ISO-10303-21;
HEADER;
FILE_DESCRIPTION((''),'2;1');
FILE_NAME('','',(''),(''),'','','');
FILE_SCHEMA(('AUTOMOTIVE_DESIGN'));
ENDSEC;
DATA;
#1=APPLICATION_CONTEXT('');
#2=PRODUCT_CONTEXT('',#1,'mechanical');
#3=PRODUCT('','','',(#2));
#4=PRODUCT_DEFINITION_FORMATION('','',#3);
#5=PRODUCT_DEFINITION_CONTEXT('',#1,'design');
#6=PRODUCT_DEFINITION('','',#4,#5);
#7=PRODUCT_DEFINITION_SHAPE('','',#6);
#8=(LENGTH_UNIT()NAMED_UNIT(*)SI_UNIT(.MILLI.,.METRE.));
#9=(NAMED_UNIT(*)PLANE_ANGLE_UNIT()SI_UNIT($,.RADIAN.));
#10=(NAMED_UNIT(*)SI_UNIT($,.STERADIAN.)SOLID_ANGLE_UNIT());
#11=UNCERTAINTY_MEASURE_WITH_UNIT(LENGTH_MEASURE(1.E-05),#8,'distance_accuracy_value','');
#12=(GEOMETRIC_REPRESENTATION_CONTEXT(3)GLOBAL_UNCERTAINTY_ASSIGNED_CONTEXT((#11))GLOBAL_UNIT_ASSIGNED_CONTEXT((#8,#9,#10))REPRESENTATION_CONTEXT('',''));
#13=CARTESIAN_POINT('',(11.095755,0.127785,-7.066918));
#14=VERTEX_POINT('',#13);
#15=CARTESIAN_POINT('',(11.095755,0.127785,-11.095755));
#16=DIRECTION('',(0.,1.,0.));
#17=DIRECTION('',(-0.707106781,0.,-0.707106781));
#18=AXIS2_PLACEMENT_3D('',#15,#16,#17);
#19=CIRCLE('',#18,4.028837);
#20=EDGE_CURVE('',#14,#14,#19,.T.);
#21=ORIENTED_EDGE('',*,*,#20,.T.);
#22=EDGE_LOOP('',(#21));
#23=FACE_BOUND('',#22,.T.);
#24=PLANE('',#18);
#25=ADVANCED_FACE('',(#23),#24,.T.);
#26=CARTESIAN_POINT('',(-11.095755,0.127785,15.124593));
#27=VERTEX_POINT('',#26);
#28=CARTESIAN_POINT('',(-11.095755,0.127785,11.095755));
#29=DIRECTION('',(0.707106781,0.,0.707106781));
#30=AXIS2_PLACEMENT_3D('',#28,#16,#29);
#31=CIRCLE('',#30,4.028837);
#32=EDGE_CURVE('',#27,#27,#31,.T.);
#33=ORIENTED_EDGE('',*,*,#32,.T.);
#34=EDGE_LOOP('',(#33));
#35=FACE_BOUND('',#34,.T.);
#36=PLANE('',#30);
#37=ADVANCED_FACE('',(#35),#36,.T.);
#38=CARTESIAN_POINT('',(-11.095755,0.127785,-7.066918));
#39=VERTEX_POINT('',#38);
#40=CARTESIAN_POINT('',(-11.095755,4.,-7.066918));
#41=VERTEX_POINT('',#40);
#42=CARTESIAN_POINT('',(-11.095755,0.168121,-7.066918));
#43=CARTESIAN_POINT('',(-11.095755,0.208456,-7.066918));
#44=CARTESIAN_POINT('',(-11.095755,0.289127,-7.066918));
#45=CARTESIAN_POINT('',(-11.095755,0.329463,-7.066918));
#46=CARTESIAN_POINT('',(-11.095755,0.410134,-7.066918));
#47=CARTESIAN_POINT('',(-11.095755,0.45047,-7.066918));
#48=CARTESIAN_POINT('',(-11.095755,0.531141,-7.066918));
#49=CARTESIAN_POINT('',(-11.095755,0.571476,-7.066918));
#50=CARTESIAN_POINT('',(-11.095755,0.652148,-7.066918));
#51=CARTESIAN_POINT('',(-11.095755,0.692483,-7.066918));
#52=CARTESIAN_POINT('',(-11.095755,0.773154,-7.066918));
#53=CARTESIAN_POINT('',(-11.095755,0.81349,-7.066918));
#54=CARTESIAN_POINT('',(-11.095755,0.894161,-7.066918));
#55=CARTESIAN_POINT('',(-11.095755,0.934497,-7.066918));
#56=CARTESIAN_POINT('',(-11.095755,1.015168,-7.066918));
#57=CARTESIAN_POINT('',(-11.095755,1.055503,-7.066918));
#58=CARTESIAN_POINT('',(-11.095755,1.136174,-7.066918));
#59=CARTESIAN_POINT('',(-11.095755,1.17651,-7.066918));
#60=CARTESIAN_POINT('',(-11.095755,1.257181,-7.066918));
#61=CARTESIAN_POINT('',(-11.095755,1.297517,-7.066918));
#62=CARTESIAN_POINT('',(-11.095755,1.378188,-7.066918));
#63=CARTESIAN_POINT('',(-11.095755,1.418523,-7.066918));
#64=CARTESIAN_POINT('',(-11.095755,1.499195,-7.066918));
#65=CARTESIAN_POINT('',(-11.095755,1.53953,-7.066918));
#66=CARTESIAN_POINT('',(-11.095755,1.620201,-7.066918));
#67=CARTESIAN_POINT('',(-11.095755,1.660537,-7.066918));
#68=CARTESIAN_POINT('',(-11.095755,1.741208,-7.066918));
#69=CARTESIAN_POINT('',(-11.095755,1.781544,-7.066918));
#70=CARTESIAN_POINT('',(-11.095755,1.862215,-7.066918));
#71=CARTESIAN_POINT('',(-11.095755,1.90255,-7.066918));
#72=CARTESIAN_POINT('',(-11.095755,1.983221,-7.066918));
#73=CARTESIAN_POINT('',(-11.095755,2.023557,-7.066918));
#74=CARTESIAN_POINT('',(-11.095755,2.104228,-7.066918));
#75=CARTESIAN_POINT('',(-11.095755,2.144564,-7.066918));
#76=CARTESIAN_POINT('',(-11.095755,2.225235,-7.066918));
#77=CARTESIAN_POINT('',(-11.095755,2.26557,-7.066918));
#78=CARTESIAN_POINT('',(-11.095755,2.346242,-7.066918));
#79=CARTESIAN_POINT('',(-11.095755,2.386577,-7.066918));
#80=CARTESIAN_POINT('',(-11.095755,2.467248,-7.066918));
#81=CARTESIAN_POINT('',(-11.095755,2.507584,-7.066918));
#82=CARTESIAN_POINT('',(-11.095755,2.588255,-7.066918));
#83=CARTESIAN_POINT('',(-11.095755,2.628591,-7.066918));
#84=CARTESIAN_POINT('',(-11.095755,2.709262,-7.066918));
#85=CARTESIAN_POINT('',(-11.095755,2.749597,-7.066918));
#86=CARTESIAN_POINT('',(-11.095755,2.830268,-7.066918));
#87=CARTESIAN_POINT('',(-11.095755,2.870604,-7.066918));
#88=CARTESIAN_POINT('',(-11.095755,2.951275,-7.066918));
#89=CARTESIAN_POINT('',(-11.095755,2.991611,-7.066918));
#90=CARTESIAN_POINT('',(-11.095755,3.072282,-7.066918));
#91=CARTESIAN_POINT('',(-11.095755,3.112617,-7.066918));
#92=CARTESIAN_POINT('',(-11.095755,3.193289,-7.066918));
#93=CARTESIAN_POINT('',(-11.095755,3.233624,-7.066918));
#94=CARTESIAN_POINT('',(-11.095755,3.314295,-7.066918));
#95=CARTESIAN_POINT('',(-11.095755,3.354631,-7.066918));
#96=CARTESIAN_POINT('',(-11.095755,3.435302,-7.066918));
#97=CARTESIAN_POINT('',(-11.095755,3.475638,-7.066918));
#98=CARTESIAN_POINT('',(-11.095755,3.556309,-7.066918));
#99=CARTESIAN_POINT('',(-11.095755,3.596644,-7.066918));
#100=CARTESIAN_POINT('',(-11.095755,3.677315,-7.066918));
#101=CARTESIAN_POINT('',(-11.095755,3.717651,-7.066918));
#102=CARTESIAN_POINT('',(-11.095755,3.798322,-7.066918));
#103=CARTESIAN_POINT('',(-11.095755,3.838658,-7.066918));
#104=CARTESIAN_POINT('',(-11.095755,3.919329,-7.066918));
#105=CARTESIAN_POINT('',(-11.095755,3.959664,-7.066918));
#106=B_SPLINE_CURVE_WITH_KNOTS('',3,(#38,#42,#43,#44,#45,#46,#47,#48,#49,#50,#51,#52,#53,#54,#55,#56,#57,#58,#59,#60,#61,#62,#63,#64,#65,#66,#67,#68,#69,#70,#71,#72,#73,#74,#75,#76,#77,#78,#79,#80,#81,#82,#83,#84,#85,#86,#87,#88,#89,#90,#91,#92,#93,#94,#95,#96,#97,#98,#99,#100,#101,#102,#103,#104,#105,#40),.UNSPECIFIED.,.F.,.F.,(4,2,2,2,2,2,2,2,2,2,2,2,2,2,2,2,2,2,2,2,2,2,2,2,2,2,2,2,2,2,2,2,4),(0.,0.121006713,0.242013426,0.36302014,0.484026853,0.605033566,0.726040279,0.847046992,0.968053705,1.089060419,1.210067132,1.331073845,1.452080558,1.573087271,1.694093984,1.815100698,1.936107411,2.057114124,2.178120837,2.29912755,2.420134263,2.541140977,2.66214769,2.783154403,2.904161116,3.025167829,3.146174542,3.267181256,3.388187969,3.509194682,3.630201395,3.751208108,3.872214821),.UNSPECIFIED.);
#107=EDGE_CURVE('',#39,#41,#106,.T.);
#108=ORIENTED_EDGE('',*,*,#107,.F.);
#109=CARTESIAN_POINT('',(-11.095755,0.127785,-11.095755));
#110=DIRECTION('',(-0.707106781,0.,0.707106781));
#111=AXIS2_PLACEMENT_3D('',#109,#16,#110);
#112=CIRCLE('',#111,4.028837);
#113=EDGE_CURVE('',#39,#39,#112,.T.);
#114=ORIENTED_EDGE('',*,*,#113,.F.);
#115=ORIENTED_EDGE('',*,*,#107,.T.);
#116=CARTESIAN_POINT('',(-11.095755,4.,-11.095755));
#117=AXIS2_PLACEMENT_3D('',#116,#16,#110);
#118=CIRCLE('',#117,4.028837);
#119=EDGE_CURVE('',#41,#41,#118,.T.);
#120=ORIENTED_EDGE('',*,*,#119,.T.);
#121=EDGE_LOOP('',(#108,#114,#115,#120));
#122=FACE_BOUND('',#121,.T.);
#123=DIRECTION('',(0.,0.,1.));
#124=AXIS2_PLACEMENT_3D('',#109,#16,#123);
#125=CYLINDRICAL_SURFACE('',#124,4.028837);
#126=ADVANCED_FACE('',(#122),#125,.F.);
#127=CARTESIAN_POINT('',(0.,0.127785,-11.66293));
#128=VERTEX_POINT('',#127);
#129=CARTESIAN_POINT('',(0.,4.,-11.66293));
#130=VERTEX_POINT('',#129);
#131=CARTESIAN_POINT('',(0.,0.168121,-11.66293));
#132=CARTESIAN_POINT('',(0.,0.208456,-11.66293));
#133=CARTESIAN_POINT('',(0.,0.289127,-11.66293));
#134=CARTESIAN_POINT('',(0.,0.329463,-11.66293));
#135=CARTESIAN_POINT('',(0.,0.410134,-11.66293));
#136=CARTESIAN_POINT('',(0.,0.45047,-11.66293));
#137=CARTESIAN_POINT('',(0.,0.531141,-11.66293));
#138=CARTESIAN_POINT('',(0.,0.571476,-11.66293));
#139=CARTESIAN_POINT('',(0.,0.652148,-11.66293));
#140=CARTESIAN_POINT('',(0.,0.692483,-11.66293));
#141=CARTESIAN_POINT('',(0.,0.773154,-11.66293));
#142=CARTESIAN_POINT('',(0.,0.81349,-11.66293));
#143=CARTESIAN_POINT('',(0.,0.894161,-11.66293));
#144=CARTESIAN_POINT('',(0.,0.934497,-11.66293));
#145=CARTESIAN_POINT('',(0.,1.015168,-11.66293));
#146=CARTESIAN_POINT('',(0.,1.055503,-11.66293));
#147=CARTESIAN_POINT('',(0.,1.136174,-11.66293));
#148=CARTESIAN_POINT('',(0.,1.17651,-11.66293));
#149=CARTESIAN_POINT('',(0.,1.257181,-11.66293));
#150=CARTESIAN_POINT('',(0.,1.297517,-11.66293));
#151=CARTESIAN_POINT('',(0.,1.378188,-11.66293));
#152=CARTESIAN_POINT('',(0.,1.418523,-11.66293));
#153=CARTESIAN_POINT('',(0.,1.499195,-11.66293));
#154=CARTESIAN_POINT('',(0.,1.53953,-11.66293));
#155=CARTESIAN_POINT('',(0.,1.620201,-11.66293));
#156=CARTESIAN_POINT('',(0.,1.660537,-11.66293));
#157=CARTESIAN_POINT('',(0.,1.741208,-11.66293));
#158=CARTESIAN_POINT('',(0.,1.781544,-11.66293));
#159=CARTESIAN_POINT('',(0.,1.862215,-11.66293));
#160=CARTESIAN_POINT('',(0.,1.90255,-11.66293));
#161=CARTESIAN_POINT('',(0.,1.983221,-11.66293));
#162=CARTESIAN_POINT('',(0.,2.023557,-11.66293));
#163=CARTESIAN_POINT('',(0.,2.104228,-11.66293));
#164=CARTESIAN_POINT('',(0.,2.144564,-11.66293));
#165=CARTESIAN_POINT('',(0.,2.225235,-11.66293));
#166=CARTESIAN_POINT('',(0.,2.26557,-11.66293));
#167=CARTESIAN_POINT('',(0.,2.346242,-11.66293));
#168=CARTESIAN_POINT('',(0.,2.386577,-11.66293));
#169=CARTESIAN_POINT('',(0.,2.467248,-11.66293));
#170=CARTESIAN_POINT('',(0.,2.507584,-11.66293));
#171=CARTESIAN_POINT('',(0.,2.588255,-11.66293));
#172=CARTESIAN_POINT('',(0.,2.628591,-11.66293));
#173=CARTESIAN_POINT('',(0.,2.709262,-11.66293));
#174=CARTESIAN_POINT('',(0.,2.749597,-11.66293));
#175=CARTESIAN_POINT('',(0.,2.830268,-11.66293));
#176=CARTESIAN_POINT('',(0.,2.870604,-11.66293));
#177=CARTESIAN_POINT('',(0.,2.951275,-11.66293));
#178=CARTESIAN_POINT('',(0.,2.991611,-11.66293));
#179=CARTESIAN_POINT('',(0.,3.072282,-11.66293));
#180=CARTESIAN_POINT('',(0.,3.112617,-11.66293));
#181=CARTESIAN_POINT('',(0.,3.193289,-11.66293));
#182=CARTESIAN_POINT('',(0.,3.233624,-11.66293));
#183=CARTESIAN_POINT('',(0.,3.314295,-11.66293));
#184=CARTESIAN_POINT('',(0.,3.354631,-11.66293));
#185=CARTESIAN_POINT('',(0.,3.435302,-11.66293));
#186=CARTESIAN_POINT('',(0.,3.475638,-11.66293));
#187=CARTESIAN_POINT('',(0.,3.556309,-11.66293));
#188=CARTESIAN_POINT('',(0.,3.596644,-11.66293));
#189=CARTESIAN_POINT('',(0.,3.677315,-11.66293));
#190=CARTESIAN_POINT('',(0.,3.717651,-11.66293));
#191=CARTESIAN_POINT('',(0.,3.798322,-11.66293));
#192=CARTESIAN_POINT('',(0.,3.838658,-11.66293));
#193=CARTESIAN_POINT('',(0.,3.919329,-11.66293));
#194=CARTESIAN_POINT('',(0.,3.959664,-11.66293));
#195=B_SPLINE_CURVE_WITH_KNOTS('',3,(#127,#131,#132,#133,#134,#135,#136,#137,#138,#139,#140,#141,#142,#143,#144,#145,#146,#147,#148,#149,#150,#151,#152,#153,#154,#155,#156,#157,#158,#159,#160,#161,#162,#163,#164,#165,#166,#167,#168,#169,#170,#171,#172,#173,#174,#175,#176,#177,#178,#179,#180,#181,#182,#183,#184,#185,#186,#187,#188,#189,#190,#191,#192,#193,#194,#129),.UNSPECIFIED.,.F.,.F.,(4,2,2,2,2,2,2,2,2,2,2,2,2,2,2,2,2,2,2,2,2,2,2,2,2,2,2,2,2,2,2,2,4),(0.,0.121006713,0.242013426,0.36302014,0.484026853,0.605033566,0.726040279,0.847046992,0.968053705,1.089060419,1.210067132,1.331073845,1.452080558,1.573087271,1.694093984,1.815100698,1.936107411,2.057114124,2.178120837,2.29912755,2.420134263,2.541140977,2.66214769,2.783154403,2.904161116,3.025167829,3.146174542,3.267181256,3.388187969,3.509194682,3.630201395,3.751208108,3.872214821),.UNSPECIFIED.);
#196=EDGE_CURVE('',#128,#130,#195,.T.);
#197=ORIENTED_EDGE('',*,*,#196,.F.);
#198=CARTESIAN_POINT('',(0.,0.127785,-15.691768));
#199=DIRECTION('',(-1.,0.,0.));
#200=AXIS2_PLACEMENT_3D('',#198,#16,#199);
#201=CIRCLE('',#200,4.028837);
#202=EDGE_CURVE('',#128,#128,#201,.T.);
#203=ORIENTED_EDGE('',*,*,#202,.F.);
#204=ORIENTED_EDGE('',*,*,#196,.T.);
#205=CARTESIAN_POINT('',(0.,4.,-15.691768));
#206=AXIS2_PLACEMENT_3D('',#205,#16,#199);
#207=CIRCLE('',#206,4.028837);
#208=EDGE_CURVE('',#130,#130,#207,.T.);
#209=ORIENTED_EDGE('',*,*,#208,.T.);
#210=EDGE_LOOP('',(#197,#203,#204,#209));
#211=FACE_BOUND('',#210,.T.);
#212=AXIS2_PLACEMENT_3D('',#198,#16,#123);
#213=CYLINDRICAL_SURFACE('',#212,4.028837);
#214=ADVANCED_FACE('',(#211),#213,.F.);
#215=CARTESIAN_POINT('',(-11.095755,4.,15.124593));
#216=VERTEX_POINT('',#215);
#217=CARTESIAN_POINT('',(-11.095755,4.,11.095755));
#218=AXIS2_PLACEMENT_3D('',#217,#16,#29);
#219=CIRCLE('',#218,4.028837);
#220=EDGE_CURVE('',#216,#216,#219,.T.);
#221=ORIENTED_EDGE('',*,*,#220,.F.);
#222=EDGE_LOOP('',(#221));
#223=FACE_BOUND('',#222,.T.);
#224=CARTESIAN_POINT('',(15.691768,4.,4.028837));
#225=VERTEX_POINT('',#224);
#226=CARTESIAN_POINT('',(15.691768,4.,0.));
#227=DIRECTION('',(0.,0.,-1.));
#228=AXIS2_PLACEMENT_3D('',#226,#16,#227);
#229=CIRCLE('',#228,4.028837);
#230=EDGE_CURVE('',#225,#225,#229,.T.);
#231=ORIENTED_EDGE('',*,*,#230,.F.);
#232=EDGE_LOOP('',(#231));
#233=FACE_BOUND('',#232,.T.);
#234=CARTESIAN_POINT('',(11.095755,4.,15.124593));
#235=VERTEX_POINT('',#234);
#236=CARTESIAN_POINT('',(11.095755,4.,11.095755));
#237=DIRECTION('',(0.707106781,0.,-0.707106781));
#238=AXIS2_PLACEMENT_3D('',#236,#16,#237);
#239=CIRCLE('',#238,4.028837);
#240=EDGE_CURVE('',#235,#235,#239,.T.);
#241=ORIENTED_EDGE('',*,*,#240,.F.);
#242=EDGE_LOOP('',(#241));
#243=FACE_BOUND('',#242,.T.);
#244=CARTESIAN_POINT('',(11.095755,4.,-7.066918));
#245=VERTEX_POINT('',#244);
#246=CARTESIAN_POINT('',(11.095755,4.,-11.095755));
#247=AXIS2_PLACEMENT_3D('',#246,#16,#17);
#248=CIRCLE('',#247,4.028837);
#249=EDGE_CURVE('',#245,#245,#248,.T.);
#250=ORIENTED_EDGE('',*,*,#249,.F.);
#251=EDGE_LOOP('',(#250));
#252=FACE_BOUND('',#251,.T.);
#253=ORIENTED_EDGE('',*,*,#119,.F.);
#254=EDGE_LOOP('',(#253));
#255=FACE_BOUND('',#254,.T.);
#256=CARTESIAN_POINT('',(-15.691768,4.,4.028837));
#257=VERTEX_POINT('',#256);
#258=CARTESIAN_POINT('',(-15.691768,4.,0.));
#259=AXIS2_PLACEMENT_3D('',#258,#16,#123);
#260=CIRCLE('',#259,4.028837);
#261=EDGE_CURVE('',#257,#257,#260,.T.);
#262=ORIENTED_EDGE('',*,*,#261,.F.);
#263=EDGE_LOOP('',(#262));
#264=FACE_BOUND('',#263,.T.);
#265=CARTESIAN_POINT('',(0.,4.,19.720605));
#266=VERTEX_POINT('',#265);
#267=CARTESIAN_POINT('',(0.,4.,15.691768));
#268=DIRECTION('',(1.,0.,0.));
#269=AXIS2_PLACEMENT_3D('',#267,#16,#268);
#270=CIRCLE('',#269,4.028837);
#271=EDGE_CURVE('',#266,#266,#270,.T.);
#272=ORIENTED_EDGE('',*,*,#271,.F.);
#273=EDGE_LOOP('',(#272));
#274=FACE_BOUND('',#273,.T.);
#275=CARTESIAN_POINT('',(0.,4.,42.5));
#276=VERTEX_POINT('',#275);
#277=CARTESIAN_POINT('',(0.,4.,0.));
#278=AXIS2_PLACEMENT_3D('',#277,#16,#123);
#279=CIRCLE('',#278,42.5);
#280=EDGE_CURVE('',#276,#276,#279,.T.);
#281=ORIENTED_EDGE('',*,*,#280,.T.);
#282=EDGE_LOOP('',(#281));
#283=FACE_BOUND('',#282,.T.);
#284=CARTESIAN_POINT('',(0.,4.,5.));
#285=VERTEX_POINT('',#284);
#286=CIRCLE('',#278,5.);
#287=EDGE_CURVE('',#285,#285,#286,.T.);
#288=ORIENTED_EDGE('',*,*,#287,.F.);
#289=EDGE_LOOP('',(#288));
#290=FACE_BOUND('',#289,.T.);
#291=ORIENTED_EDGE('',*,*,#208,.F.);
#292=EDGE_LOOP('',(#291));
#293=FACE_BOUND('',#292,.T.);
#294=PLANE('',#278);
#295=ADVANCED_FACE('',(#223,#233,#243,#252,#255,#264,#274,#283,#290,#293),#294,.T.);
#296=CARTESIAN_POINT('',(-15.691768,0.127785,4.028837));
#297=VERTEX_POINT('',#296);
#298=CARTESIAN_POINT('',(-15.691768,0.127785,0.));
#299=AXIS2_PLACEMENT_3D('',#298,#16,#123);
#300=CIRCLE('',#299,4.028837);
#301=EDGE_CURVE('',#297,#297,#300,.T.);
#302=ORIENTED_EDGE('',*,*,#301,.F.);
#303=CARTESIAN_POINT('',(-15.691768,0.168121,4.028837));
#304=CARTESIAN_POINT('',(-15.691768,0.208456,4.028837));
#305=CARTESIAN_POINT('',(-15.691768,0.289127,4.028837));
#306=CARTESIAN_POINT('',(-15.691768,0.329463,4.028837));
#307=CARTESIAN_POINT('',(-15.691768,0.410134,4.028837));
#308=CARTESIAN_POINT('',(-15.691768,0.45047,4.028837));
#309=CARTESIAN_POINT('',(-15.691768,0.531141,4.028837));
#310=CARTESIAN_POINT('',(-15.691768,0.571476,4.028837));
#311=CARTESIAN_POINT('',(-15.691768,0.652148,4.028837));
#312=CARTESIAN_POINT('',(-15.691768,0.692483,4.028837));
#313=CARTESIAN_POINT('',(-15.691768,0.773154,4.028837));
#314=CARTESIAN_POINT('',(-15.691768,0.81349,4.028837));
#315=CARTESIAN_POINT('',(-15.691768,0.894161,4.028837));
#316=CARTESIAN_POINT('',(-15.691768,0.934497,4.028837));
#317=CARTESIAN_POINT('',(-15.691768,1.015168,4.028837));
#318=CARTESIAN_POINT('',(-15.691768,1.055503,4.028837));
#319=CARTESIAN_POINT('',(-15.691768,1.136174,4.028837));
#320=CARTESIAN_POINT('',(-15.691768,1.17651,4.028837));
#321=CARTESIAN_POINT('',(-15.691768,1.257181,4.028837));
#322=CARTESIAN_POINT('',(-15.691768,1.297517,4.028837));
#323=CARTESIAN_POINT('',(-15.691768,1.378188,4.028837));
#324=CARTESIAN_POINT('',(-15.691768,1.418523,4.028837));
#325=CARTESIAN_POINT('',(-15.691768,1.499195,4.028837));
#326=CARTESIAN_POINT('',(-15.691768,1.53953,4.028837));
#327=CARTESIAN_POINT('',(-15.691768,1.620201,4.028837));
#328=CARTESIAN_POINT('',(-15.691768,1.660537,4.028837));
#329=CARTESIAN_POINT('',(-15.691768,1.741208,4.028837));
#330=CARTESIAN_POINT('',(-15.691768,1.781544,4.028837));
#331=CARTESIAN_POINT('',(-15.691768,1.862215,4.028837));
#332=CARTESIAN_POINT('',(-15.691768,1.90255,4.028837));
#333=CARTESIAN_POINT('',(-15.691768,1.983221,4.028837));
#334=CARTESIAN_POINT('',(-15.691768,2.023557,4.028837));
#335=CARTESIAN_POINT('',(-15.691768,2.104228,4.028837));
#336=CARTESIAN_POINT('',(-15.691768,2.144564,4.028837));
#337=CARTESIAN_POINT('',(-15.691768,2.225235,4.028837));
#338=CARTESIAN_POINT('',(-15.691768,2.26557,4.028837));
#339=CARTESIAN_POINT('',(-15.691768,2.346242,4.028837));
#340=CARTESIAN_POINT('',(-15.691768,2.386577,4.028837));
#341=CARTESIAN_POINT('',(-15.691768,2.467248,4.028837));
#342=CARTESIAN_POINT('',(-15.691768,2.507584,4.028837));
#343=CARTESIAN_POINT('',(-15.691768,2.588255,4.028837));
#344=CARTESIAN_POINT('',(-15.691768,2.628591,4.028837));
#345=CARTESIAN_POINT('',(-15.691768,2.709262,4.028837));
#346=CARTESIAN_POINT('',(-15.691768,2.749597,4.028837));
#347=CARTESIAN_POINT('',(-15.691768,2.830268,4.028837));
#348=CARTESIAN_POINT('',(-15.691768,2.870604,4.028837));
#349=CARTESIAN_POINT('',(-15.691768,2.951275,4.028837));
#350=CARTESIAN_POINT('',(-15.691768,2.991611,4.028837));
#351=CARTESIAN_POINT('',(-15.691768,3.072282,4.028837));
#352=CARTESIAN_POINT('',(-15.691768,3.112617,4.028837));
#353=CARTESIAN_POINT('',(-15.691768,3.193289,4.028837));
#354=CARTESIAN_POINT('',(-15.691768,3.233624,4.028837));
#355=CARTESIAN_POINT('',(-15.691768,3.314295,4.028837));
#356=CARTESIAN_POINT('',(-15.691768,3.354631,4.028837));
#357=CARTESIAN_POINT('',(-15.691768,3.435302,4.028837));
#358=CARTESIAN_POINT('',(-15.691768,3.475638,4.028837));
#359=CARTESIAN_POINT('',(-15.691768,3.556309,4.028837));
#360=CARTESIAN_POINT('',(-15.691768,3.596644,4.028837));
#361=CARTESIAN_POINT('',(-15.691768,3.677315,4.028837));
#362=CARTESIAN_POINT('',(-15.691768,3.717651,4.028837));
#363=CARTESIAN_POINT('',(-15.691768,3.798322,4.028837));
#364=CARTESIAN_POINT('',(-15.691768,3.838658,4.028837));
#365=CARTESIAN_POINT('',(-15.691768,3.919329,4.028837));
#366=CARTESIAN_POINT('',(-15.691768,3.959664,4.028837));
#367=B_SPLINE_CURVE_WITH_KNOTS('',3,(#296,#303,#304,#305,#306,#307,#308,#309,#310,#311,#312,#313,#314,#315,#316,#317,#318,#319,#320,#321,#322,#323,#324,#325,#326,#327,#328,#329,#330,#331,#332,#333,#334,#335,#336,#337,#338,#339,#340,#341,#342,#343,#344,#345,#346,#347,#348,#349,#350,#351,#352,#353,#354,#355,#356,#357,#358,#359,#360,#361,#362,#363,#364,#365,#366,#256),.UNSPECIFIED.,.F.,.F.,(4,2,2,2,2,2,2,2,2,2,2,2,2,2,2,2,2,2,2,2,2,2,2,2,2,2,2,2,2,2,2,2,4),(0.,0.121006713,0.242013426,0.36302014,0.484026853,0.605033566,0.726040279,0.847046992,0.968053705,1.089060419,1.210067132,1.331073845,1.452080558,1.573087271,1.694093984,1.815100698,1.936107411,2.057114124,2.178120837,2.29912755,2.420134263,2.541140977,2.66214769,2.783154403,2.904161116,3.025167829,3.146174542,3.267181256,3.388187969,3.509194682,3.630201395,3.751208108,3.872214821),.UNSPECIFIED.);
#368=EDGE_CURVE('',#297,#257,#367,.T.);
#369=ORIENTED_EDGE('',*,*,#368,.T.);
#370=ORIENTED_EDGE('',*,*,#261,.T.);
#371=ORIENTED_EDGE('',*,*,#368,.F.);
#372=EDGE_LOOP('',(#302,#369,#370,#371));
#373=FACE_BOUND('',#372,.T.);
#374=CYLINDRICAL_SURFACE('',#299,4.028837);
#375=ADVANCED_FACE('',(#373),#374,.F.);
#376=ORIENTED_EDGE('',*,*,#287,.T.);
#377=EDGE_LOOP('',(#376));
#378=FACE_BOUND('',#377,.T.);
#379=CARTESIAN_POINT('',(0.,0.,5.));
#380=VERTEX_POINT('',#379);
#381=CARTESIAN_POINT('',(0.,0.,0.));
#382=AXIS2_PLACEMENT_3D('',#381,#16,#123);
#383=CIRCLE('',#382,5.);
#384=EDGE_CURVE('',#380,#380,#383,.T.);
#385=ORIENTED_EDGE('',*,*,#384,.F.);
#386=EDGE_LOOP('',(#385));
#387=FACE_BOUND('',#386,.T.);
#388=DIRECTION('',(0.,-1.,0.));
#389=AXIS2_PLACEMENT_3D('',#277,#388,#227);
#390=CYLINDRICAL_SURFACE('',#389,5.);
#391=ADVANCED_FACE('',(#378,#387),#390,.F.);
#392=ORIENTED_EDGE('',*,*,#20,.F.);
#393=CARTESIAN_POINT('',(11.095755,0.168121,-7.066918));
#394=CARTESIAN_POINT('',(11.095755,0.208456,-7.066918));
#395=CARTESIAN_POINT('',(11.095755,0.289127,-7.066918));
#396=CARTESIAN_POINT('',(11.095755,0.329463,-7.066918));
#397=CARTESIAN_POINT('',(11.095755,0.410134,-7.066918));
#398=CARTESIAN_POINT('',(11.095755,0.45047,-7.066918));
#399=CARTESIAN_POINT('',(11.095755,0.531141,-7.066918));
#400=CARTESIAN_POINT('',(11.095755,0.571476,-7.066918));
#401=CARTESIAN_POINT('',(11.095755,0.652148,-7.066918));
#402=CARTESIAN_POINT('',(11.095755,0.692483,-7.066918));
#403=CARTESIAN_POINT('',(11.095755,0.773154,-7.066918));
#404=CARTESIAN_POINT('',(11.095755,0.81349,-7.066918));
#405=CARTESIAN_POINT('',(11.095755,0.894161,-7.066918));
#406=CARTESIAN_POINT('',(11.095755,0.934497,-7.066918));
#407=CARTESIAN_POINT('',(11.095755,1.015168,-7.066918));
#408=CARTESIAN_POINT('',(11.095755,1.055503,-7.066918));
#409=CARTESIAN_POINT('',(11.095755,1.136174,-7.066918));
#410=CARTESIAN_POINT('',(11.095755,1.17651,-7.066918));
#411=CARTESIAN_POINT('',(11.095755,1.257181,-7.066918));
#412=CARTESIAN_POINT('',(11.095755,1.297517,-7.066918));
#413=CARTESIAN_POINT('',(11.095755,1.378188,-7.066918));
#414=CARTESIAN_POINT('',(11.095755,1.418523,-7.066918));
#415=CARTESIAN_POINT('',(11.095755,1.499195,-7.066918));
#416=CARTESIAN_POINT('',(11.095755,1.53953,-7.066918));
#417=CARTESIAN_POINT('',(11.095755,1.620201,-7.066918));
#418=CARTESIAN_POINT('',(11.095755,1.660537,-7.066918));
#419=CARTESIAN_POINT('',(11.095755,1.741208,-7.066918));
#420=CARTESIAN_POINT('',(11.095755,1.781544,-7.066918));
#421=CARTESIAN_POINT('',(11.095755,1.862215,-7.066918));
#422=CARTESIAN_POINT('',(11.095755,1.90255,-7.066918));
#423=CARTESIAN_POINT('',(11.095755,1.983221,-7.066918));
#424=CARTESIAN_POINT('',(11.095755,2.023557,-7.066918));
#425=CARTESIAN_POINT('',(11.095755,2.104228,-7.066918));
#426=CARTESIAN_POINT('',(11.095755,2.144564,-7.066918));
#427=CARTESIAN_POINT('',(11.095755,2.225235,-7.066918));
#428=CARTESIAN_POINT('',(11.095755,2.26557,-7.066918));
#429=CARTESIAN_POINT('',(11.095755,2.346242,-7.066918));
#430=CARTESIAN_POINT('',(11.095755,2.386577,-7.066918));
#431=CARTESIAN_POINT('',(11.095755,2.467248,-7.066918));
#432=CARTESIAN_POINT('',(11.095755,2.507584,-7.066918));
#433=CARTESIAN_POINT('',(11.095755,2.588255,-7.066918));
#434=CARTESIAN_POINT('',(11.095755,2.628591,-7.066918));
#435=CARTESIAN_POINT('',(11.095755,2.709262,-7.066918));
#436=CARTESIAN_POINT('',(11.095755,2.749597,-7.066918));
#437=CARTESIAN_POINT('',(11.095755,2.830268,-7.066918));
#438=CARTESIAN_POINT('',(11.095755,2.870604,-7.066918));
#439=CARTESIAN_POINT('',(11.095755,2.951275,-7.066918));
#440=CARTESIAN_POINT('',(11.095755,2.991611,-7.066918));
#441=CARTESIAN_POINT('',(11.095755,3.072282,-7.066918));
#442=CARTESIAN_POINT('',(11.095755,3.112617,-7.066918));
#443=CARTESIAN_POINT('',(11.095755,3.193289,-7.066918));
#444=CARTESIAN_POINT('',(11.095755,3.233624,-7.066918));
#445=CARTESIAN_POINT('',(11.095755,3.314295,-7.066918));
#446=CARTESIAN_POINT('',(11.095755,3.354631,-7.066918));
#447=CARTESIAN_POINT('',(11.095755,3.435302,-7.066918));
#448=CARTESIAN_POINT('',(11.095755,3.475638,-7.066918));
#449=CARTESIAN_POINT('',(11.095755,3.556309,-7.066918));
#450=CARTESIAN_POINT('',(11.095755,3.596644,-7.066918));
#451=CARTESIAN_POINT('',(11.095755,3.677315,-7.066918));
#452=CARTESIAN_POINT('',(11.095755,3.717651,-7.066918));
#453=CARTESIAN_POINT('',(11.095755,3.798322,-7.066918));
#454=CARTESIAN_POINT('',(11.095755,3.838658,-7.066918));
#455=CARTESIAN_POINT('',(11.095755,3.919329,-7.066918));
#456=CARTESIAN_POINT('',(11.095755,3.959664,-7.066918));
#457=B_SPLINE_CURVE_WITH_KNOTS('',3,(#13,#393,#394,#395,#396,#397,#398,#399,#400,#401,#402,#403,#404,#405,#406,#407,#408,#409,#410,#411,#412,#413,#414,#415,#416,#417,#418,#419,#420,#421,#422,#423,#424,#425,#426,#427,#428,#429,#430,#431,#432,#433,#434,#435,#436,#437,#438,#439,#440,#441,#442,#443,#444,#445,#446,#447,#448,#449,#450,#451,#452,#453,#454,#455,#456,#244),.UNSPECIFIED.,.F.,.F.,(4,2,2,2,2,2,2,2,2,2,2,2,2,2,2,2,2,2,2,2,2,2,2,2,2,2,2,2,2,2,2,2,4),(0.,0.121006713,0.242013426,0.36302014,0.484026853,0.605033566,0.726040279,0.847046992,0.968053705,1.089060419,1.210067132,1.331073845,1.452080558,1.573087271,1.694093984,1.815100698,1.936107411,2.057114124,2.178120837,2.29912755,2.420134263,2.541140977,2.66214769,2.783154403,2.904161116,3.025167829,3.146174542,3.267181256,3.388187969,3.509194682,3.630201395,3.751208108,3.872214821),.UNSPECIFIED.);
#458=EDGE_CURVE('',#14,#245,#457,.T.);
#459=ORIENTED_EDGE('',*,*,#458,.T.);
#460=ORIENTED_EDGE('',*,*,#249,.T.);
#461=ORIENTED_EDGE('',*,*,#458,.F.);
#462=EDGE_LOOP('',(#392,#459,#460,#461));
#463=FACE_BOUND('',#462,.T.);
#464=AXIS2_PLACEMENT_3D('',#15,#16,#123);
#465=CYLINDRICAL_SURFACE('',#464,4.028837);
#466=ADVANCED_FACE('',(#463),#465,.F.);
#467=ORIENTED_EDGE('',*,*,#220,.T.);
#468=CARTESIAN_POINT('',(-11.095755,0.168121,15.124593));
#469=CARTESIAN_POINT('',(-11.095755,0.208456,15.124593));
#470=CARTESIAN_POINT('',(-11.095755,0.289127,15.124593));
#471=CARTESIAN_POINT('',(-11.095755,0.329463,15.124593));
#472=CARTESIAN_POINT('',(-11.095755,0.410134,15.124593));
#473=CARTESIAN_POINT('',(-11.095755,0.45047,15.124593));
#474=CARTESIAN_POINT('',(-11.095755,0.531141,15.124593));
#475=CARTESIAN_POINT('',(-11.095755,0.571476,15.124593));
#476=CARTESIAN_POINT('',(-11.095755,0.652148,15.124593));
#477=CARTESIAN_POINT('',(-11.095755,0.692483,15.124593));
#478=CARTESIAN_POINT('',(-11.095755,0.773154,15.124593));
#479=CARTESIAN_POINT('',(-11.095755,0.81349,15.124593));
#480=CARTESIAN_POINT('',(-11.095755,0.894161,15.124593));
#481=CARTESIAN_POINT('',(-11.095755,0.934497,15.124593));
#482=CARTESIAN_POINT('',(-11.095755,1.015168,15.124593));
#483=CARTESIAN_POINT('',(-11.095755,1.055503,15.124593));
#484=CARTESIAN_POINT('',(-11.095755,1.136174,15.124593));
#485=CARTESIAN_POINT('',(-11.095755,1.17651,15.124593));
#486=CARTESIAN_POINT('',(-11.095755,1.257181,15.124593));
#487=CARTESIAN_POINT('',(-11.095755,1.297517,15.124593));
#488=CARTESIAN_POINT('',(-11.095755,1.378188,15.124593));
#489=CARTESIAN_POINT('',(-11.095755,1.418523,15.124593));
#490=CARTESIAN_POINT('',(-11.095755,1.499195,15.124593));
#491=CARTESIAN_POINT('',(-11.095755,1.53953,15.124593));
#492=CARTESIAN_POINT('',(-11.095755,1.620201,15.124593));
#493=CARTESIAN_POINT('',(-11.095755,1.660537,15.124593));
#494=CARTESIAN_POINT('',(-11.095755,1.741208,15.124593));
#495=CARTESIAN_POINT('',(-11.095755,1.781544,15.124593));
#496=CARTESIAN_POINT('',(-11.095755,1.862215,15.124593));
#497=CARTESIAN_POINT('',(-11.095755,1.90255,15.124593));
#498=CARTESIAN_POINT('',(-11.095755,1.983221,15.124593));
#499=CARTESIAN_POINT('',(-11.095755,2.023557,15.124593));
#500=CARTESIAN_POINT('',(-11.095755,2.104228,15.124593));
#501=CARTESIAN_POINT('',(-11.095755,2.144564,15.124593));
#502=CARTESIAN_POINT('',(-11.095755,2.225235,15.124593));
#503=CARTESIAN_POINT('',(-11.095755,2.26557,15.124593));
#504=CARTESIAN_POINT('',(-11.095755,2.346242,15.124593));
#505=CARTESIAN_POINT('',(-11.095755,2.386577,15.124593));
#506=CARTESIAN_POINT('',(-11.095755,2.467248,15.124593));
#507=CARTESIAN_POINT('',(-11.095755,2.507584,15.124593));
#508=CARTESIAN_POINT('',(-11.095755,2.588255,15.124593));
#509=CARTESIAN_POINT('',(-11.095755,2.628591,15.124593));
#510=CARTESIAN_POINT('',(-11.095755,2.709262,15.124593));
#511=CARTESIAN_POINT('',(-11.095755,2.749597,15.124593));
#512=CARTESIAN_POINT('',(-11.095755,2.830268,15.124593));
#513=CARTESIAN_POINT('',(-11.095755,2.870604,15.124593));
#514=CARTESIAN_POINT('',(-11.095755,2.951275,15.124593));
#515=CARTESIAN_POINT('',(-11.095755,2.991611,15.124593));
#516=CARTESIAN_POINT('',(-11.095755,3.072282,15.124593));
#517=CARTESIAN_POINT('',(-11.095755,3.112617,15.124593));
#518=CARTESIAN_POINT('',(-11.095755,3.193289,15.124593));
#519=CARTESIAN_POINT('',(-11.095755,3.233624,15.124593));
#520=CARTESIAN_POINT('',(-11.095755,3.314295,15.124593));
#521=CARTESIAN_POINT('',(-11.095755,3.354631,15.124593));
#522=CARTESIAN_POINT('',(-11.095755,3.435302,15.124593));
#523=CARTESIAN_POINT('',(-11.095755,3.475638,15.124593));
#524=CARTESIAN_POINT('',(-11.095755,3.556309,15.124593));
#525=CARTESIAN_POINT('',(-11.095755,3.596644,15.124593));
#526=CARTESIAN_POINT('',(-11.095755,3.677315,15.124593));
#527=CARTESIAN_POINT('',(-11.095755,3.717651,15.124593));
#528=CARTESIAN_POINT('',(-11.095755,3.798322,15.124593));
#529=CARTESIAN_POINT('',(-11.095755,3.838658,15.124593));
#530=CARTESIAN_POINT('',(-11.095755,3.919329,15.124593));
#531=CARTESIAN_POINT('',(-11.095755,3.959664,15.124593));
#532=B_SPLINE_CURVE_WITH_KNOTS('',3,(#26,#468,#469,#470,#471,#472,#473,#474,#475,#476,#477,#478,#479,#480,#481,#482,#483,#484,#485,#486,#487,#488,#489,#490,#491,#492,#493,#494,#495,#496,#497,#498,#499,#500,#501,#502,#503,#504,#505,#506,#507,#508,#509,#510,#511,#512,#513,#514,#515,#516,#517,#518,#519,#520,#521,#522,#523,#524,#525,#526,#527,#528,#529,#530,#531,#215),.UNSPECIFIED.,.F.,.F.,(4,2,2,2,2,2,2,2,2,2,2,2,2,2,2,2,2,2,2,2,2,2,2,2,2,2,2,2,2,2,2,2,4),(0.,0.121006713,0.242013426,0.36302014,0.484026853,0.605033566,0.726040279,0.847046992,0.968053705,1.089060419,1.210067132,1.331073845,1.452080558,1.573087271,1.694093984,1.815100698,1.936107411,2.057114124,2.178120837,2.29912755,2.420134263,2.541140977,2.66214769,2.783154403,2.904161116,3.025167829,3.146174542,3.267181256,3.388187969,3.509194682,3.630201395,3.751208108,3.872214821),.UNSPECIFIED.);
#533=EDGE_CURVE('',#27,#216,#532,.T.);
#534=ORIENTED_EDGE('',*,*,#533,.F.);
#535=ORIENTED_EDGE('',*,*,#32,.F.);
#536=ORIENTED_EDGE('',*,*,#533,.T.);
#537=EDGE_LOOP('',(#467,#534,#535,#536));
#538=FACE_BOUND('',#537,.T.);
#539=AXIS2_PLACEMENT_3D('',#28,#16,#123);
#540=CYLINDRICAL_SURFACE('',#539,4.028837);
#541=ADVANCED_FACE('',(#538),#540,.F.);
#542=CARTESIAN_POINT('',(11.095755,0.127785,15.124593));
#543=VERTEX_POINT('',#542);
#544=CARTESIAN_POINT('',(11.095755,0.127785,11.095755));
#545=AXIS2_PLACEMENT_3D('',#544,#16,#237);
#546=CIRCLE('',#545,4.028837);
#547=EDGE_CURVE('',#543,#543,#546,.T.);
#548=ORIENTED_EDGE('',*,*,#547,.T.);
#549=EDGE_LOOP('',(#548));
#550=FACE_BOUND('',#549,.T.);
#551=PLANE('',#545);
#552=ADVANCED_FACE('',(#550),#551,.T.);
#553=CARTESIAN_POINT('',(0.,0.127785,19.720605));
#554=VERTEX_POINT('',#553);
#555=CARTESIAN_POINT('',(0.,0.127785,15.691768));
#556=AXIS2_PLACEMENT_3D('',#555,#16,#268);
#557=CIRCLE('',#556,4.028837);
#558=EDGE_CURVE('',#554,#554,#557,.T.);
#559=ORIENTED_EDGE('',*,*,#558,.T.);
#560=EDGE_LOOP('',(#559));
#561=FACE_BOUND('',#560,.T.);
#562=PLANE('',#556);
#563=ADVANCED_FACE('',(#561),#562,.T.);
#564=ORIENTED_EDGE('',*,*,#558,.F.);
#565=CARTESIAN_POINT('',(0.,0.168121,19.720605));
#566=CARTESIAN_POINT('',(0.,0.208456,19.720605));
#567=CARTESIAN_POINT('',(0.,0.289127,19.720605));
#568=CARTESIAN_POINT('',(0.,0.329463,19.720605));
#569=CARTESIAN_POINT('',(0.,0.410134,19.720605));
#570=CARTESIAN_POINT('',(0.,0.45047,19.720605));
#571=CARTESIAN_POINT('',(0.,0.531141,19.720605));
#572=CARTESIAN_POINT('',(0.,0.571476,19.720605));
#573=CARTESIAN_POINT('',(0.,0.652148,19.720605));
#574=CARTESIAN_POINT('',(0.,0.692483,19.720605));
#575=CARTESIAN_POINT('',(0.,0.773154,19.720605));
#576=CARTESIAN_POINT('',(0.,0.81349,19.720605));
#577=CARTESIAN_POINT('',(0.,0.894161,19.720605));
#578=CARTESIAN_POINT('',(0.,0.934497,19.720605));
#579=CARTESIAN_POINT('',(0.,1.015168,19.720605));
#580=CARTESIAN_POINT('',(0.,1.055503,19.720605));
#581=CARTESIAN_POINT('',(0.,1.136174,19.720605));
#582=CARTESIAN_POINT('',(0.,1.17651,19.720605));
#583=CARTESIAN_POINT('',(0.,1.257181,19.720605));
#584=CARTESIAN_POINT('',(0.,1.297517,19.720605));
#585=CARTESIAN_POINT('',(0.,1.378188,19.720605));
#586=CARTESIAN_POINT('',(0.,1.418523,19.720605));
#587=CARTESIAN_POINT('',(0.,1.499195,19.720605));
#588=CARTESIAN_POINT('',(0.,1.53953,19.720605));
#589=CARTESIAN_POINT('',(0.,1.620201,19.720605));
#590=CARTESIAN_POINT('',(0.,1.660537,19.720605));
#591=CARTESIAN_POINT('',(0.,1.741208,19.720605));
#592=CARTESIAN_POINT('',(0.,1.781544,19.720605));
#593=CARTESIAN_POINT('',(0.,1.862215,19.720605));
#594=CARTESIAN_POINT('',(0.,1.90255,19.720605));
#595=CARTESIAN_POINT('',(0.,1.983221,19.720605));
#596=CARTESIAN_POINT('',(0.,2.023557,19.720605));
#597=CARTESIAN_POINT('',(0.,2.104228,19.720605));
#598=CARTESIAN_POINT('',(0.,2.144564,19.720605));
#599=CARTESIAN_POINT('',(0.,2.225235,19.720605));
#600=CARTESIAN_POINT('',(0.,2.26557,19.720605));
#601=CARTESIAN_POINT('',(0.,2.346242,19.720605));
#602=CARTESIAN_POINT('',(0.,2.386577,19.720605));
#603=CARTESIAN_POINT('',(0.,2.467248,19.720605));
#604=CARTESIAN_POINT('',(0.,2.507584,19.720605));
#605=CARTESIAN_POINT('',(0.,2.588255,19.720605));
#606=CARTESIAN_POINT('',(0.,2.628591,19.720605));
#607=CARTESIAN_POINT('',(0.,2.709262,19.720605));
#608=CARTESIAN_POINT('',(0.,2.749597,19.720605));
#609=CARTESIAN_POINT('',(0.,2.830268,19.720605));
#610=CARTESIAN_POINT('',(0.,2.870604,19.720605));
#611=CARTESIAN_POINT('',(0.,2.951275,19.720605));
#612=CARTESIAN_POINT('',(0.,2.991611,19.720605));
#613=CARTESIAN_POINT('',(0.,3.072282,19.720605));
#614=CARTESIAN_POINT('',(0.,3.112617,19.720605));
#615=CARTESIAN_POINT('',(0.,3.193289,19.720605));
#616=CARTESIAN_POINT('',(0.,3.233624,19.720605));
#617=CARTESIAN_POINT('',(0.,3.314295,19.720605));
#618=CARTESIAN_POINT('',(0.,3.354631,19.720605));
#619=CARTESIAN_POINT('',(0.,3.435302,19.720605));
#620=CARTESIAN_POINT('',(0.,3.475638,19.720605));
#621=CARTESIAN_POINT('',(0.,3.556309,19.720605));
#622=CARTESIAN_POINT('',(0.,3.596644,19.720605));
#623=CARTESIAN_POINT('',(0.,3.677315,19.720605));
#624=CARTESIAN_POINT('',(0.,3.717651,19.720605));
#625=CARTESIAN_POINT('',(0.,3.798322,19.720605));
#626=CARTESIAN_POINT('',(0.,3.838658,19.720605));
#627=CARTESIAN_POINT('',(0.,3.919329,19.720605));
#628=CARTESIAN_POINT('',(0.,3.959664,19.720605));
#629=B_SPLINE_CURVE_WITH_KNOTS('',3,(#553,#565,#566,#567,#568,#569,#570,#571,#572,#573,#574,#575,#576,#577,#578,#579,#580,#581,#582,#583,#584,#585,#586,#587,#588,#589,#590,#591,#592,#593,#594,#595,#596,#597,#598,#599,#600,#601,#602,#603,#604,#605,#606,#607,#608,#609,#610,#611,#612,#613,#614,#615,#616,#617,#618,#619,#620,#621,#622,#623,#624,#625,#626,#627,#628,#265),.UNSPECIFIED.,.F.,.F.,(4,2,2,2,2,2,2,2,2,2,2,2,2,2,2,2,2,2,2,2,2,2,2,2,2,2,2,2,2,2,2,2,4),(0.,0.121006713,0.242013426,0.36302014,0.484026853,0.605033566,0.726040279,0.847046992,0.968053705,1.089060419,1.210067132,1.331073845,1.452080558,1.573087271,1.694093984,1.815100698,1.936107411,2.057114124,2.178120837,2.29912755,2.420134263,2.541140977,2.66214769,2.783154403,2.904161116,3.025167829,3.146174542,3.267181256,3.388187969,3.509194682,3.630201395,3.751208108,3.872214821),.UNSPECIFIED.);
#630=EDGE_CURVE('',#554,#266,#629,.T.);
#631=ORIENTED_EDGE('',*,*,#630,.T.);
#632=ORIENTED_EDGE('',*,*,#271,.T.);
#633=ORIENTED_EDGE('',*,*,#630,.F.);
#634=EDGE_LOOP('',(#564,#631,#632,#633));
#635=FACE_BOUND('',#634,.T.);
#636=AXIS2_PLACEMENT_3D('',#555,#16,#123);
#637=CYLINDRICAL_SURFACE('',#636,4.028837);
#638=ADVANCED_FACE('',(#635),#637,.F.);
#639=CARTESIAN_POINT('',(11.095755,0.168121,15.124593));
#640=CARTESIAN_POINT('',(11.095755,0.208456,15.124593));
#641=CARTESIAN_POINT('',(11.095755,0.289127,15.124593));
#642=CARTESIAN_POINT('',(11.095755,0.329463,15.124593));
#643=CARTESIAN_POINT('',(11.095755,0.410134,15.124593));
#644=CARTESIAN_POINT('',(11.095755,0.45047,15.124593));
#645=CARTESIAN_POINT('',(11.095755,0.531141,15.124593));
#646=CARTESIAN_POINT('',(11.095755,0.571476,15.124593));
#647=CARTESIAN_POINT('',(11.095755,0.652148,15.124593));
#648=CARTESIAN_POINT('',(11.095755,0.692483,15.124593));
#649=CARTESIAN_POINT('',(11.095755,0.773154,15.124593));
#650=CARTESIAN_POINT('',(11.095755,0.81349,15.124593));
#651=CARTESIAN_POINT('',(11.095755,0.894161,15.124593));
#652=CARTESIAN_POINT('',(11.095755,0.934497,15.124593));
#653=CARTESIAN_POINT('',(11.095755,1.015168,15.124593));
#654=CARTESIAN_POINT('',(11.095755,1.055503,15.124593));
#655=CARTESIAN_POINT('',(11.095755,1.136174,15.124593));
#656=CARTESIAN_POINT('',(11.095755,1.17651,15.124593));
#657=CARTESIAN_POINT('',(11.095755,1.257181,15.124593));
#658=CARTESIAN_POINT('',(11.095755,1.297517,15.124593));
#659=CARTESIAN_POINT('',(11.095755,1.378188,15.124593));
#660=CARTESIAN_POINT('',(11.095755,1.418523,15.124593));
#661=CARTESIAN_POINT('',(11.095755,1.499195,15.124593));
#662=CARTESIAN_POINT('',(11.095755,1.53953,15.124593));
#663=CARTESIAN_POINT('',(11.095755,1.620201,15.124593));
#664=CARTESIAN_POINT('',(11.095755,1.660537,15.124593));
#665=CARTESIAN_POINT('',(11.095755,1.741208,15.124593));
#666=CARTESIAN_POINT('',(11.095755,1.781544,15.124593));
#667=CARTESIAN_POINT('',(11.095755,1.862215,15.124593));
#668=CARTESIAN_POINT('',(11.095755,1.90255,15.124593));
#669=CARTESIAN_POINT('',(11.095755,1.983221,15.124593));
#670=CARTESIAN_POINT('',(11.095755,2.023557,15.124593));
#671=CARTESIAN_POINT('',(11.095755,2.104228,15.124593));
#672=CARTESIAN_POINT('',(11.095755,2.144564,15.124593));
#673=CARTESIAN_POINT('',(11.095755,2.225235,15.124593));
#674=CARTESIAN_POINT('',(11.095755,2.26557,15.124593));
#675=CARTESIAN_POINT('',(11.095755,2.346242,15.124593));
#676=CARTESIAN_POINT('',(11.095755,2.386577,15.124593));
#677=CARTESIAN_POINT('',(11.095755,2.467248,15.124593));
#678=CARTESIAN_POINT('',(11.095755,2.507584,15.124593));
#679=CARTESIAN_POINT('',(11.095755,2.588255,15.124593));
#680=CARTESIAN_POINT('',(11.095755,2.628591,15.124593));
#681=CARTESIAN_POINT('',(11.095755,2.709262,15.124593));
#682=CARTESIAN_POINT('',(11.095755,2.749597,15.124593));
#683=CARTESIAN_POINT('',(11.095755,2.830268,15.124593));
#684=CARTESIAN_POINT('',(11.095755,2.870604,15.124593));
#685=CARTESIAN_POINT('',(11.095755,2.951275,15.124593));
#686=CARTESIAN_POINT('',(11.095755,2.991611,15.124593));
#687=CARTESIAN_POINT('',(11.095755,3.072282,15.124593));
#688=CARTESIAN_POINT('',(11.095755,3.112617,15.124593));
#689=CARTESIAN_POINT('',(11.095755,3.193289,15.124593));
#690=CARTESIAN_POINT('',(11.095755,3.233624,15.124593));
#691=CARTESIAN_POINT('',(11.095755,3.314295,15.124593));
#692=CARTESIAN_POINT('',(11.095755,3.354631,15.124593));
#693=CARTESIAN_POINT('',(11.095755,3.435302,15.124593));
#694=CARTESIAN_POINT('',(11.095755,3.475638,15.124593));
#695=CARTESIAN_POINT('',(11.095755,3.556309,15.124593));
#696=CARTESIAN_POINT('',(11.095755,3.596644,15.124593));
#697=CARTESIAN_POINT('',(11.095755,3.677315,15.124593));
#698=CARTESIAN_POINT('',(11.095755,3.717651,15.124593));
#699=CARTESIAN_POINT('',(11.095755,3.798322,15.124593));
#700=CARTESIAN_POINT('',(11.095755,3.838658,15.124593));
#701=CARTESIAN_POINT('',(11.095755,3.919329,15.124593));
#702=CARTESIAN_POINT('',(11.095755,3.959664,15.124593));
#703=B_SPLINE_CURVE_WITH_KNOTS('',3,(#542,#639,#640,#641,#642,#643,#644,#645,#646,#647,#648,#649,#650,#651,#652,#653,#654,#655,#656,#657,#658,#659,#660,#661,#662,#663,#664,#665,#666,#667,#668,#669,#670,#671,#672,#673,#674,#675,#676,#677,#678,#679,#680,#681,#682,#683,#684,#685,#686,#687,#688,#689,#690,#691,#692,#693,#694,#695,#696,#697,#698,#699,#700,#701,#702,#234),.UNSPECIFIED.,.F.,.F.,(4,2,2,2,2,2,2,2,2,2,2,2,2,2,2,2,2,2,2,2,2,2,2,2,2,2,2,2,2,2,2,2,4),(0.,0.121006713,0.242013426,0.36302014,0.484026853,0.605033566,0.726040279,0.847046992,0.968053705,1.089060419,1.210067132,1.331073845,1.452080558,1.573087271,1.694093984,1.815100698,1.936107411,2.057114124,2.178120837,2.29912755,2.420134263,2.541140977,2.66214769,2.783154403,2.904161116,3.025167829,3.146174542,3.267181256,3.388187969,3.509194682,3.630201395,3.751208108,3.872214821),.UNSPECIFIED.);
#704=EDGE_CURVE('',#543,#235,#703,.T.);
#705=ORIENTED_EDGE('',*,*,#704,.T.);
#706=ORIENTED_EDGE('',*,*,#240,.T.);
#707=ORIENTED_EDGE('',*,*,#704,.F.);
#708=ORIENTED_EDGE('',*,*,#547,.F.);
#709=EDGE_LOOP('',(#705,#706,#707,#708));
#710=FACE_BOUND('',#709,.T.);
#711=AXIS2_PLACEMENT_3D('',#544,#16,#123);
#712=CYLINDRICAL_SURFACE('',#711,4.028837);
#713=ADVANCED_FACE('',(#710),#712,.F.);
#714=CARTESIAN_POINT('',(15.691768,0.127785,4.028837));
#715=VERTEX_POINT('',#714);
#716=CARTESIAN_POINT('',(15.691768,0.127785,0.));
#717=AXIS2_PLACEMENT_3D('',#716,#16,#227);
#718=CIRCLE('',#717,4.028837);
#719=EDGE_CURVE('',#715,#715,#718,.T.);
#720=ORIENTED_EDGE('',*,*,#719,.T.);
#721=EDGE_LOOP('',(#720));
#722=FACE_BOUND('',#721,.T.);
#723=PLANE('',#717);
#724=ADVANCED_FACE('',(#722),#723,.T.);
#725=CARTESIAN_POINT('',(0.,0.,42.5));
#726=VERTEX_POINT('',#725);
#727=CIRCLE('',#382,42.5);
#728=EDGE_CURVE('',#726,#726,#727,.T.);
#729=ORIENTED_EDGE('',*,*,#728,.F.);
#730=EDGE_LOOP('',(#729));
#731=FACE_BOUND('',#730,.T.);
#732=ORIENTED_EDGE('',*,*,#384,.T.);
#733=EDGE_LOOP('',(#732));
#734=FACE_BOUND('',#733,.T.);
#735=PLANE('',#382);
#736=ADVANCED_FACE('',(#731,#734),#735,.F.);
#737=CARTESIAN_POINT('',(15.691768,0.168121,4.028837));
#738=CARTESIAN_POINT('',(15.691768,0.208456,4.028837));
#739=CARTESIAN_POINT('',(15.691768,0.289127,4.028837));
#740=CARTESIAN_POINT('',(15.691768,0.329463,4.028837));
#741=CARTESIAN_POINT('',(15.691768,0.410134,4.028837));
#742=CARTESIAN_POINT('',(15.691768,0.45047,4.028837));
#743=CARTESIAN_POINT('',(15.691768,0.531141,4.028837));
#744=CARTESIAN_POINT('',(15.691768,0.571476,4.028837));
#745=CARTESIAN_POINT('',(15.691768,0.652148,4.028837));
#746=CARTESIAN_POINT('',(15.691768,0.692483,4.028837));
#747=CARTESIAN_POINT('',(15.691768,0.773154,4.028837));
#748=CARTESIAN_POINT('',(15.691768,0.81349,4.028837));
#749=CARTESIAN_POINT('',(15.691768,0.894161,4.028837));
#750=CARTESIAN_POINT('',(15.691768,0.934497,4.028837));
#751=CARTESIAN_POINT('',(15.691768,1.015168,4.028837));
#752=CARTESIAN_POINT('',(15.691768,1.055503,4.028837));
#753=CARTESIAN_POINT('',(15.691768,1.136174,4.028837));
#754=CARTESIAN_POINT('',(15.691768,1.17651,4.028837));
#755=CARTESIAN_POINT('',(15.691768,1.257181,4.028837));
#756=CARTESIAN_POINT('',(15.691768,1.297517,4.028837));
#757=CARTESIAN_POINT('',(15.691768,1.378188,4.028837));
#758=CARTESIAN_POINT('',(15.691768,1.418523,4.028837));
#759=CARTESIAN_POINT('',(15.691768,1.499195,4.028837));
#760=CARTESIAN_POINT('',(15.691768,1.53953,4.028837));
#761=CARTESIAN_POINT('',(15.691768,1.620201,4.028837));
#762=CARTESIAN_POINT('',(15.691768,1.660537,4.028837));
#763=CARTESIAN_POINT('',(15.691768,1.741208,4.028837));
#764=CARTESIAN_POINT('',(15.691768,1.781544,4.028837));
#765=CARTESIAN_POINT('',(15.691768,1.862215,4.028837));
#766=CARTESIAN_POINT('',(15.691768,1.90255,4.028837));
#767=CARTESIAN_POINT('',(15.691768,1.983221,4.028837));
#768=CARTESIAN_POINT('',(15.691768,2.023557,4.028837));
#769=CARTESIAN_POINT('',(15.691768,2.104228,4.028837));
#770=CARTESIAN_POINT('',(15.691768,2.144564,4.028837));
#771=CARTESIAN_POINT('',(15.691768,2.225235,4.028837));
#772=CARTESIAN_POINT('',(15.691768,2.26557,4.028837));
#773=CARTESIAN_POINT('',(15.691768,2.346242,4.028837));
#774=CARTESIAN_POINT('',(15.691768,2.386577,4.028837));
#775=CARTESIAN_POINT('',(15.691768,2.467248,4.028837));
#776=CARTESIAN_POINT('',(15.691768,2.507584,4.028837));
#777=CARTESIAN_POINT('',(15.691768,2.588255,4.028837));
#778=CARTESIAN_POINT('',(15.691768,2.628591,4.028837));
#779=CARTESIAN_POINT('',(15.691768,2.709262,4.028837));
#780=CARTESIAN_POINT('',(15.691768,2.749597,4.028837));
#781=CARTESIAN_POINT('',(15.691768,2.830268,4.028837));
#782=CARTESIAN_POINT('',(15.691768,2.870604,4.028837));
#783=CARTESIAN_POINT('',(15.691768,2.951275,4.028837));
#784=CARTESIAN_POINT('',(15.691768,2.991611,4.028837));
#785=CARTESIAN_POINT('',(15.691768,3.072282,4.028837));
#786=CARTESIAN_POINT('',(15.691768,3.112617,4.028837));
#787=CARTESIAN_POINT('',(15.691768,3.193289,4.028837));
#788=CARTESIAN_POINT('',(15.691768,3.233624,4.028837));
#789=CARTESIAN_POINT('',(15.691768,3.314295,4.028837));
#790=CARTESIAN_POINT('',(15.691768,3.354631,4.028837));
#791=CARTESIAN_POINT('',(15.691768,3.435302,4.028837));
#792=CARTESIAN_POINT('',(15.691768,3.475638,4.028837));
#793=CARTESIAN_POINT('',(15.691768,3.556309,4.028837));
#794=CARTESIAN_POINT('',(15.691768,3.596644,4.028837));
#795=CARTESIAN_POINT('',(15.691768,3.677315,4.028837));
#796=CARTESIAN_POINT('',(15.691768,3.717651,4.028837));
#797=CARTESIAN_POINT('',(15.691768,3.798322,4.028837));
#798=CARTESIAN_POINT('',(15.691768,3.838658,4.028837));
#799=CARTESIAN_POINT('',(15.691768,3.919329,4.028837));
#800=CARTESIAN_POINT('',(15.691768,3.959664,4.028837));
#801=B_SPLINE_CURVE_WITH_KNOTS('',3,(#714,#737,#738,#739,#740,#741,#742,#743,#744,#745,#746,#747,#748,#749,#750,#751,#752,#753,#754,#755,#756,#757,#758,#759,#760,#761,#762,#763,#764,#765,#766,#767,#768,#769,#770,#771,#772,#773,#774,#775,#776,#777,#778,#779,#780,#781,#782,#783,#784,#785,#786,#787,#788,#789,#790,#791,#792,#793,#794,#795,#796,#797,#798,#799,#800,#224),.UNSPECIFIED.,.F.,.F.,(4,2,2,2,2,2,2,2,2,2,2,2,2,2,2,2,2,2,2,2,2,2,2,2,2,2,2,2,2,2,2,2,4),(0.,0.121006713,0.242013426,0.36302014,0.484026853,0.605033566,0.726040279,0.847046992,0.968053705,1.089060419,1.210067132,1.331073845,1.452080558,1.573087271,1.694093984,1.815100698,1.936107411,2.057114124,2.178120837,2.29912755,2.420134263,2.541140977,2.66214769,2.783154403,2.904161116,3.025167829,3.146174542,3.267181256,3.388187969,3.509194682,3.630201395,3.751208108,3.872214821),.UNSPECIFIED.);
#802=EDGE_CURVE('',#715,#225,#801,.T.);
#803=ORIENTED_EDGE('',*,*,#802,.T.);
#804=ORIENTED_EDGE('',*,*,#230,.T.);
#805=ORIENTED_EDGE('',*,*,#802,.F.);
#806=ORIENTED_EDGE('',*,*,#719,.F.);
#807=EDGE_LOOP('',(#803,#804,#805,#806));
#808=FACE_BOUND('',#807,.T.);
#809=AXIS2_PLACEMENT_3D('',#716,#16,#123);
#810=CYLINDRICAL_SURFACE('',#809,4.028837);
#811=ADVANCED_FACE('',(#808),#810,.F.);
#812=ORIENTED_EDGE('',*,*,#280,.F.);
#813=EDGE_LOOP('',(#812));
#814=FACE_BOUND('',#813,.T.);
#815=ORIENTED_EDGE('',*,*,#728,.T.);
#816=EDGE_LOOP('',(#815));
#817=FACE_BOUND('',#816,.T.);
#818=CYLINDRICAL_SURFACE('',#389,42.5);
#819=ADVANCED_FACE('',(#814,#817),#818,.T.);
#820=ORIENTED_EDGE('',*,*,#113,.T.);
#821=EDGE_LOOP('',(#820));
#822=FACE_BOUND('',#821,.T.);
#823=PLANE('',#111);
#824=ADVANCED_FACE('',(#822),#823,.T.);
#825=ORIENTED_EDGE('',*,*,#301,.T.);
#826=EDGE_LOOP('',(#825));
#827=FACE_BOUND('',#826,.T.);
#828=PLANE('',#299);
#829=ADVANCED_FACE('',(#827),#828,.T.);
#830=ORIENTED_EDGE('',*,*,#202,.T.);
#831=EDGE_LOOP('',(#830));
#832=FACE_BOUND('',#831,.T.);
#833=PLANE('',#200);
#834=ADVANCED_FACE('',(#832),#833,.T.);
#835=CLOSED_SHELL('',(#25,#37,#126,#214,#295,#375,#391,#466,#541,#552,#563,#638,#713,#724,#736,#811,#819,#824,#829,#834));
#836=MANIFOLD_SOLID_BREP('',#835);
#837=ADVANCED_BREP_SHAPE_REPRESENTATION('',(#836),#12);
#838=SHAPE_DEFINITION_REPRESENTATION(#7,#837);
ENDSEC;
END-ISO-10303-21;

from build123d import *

# Parameters (mm, degrees)
SKETCH1_R           = 42.5
BOSS_EXTRUDE1_DEPTH = 4
SKETCH2_R           = 5
CUT_EXTRUDE1_DEPTH  = 61.237031799
SKETCH3_R           = 4.028837432
CUT_EXTRUDE2_DEPTH  = 3.872214821
CIRPATTERN1_COUNT   = 8


with BuildPart() as part:
    # Sketch1 → Boss-Extrude1 (new body)
    with BuildSketch(Plane(origin=(0, 0, 0), x_dir=(1, 0, 0), z_dir=(0, 1, 0))):
        Circle(SKETCH1_R)
    extrude(amount=BOSS_EXTRUDE1_DEPTH)

    # Sketch2 → Cut-Extrude1 (cut, through all)
    with BuildSketch(Plane(origin=(0, 0, 0), x_dir=(1, 0, 0), z_dir=(0, 1, 0))):
        Circle(SKETCH2_R)
    extrude(amount=CUT_EXTRUDE1_DEPTH, mode=Mode.SUBTRACT)

    # Sketch3 → Cut-Extrude2 (cut)
    with BuildSketch(Plane(origin=(0, 4, 0), x_dir=(1, 0, 0), z_dir=(0, 1, 0))):
        with Locations((-15.691767503, 0)):
            Circle(SKETCH3_R)
    cut_extrude2 = extrude(amount=-CUT_EXTRUDE2_DEPTH, mode=Mode.SUBTRACT)

    # CirPattern1: Cut-Extrude2 ×8 about axis
    cirpattern1_axis = Axis((0, 0, 0), (0, 1, 0))
    for i in range(1, CIRPATTERN1_COUNT):
        add(cut_extrude2.rotate(cirpattern1_axis, i * 360 / CIRPATTERN1_COUNT), mode=Mode.SUBTRACT)


solid = part.part
